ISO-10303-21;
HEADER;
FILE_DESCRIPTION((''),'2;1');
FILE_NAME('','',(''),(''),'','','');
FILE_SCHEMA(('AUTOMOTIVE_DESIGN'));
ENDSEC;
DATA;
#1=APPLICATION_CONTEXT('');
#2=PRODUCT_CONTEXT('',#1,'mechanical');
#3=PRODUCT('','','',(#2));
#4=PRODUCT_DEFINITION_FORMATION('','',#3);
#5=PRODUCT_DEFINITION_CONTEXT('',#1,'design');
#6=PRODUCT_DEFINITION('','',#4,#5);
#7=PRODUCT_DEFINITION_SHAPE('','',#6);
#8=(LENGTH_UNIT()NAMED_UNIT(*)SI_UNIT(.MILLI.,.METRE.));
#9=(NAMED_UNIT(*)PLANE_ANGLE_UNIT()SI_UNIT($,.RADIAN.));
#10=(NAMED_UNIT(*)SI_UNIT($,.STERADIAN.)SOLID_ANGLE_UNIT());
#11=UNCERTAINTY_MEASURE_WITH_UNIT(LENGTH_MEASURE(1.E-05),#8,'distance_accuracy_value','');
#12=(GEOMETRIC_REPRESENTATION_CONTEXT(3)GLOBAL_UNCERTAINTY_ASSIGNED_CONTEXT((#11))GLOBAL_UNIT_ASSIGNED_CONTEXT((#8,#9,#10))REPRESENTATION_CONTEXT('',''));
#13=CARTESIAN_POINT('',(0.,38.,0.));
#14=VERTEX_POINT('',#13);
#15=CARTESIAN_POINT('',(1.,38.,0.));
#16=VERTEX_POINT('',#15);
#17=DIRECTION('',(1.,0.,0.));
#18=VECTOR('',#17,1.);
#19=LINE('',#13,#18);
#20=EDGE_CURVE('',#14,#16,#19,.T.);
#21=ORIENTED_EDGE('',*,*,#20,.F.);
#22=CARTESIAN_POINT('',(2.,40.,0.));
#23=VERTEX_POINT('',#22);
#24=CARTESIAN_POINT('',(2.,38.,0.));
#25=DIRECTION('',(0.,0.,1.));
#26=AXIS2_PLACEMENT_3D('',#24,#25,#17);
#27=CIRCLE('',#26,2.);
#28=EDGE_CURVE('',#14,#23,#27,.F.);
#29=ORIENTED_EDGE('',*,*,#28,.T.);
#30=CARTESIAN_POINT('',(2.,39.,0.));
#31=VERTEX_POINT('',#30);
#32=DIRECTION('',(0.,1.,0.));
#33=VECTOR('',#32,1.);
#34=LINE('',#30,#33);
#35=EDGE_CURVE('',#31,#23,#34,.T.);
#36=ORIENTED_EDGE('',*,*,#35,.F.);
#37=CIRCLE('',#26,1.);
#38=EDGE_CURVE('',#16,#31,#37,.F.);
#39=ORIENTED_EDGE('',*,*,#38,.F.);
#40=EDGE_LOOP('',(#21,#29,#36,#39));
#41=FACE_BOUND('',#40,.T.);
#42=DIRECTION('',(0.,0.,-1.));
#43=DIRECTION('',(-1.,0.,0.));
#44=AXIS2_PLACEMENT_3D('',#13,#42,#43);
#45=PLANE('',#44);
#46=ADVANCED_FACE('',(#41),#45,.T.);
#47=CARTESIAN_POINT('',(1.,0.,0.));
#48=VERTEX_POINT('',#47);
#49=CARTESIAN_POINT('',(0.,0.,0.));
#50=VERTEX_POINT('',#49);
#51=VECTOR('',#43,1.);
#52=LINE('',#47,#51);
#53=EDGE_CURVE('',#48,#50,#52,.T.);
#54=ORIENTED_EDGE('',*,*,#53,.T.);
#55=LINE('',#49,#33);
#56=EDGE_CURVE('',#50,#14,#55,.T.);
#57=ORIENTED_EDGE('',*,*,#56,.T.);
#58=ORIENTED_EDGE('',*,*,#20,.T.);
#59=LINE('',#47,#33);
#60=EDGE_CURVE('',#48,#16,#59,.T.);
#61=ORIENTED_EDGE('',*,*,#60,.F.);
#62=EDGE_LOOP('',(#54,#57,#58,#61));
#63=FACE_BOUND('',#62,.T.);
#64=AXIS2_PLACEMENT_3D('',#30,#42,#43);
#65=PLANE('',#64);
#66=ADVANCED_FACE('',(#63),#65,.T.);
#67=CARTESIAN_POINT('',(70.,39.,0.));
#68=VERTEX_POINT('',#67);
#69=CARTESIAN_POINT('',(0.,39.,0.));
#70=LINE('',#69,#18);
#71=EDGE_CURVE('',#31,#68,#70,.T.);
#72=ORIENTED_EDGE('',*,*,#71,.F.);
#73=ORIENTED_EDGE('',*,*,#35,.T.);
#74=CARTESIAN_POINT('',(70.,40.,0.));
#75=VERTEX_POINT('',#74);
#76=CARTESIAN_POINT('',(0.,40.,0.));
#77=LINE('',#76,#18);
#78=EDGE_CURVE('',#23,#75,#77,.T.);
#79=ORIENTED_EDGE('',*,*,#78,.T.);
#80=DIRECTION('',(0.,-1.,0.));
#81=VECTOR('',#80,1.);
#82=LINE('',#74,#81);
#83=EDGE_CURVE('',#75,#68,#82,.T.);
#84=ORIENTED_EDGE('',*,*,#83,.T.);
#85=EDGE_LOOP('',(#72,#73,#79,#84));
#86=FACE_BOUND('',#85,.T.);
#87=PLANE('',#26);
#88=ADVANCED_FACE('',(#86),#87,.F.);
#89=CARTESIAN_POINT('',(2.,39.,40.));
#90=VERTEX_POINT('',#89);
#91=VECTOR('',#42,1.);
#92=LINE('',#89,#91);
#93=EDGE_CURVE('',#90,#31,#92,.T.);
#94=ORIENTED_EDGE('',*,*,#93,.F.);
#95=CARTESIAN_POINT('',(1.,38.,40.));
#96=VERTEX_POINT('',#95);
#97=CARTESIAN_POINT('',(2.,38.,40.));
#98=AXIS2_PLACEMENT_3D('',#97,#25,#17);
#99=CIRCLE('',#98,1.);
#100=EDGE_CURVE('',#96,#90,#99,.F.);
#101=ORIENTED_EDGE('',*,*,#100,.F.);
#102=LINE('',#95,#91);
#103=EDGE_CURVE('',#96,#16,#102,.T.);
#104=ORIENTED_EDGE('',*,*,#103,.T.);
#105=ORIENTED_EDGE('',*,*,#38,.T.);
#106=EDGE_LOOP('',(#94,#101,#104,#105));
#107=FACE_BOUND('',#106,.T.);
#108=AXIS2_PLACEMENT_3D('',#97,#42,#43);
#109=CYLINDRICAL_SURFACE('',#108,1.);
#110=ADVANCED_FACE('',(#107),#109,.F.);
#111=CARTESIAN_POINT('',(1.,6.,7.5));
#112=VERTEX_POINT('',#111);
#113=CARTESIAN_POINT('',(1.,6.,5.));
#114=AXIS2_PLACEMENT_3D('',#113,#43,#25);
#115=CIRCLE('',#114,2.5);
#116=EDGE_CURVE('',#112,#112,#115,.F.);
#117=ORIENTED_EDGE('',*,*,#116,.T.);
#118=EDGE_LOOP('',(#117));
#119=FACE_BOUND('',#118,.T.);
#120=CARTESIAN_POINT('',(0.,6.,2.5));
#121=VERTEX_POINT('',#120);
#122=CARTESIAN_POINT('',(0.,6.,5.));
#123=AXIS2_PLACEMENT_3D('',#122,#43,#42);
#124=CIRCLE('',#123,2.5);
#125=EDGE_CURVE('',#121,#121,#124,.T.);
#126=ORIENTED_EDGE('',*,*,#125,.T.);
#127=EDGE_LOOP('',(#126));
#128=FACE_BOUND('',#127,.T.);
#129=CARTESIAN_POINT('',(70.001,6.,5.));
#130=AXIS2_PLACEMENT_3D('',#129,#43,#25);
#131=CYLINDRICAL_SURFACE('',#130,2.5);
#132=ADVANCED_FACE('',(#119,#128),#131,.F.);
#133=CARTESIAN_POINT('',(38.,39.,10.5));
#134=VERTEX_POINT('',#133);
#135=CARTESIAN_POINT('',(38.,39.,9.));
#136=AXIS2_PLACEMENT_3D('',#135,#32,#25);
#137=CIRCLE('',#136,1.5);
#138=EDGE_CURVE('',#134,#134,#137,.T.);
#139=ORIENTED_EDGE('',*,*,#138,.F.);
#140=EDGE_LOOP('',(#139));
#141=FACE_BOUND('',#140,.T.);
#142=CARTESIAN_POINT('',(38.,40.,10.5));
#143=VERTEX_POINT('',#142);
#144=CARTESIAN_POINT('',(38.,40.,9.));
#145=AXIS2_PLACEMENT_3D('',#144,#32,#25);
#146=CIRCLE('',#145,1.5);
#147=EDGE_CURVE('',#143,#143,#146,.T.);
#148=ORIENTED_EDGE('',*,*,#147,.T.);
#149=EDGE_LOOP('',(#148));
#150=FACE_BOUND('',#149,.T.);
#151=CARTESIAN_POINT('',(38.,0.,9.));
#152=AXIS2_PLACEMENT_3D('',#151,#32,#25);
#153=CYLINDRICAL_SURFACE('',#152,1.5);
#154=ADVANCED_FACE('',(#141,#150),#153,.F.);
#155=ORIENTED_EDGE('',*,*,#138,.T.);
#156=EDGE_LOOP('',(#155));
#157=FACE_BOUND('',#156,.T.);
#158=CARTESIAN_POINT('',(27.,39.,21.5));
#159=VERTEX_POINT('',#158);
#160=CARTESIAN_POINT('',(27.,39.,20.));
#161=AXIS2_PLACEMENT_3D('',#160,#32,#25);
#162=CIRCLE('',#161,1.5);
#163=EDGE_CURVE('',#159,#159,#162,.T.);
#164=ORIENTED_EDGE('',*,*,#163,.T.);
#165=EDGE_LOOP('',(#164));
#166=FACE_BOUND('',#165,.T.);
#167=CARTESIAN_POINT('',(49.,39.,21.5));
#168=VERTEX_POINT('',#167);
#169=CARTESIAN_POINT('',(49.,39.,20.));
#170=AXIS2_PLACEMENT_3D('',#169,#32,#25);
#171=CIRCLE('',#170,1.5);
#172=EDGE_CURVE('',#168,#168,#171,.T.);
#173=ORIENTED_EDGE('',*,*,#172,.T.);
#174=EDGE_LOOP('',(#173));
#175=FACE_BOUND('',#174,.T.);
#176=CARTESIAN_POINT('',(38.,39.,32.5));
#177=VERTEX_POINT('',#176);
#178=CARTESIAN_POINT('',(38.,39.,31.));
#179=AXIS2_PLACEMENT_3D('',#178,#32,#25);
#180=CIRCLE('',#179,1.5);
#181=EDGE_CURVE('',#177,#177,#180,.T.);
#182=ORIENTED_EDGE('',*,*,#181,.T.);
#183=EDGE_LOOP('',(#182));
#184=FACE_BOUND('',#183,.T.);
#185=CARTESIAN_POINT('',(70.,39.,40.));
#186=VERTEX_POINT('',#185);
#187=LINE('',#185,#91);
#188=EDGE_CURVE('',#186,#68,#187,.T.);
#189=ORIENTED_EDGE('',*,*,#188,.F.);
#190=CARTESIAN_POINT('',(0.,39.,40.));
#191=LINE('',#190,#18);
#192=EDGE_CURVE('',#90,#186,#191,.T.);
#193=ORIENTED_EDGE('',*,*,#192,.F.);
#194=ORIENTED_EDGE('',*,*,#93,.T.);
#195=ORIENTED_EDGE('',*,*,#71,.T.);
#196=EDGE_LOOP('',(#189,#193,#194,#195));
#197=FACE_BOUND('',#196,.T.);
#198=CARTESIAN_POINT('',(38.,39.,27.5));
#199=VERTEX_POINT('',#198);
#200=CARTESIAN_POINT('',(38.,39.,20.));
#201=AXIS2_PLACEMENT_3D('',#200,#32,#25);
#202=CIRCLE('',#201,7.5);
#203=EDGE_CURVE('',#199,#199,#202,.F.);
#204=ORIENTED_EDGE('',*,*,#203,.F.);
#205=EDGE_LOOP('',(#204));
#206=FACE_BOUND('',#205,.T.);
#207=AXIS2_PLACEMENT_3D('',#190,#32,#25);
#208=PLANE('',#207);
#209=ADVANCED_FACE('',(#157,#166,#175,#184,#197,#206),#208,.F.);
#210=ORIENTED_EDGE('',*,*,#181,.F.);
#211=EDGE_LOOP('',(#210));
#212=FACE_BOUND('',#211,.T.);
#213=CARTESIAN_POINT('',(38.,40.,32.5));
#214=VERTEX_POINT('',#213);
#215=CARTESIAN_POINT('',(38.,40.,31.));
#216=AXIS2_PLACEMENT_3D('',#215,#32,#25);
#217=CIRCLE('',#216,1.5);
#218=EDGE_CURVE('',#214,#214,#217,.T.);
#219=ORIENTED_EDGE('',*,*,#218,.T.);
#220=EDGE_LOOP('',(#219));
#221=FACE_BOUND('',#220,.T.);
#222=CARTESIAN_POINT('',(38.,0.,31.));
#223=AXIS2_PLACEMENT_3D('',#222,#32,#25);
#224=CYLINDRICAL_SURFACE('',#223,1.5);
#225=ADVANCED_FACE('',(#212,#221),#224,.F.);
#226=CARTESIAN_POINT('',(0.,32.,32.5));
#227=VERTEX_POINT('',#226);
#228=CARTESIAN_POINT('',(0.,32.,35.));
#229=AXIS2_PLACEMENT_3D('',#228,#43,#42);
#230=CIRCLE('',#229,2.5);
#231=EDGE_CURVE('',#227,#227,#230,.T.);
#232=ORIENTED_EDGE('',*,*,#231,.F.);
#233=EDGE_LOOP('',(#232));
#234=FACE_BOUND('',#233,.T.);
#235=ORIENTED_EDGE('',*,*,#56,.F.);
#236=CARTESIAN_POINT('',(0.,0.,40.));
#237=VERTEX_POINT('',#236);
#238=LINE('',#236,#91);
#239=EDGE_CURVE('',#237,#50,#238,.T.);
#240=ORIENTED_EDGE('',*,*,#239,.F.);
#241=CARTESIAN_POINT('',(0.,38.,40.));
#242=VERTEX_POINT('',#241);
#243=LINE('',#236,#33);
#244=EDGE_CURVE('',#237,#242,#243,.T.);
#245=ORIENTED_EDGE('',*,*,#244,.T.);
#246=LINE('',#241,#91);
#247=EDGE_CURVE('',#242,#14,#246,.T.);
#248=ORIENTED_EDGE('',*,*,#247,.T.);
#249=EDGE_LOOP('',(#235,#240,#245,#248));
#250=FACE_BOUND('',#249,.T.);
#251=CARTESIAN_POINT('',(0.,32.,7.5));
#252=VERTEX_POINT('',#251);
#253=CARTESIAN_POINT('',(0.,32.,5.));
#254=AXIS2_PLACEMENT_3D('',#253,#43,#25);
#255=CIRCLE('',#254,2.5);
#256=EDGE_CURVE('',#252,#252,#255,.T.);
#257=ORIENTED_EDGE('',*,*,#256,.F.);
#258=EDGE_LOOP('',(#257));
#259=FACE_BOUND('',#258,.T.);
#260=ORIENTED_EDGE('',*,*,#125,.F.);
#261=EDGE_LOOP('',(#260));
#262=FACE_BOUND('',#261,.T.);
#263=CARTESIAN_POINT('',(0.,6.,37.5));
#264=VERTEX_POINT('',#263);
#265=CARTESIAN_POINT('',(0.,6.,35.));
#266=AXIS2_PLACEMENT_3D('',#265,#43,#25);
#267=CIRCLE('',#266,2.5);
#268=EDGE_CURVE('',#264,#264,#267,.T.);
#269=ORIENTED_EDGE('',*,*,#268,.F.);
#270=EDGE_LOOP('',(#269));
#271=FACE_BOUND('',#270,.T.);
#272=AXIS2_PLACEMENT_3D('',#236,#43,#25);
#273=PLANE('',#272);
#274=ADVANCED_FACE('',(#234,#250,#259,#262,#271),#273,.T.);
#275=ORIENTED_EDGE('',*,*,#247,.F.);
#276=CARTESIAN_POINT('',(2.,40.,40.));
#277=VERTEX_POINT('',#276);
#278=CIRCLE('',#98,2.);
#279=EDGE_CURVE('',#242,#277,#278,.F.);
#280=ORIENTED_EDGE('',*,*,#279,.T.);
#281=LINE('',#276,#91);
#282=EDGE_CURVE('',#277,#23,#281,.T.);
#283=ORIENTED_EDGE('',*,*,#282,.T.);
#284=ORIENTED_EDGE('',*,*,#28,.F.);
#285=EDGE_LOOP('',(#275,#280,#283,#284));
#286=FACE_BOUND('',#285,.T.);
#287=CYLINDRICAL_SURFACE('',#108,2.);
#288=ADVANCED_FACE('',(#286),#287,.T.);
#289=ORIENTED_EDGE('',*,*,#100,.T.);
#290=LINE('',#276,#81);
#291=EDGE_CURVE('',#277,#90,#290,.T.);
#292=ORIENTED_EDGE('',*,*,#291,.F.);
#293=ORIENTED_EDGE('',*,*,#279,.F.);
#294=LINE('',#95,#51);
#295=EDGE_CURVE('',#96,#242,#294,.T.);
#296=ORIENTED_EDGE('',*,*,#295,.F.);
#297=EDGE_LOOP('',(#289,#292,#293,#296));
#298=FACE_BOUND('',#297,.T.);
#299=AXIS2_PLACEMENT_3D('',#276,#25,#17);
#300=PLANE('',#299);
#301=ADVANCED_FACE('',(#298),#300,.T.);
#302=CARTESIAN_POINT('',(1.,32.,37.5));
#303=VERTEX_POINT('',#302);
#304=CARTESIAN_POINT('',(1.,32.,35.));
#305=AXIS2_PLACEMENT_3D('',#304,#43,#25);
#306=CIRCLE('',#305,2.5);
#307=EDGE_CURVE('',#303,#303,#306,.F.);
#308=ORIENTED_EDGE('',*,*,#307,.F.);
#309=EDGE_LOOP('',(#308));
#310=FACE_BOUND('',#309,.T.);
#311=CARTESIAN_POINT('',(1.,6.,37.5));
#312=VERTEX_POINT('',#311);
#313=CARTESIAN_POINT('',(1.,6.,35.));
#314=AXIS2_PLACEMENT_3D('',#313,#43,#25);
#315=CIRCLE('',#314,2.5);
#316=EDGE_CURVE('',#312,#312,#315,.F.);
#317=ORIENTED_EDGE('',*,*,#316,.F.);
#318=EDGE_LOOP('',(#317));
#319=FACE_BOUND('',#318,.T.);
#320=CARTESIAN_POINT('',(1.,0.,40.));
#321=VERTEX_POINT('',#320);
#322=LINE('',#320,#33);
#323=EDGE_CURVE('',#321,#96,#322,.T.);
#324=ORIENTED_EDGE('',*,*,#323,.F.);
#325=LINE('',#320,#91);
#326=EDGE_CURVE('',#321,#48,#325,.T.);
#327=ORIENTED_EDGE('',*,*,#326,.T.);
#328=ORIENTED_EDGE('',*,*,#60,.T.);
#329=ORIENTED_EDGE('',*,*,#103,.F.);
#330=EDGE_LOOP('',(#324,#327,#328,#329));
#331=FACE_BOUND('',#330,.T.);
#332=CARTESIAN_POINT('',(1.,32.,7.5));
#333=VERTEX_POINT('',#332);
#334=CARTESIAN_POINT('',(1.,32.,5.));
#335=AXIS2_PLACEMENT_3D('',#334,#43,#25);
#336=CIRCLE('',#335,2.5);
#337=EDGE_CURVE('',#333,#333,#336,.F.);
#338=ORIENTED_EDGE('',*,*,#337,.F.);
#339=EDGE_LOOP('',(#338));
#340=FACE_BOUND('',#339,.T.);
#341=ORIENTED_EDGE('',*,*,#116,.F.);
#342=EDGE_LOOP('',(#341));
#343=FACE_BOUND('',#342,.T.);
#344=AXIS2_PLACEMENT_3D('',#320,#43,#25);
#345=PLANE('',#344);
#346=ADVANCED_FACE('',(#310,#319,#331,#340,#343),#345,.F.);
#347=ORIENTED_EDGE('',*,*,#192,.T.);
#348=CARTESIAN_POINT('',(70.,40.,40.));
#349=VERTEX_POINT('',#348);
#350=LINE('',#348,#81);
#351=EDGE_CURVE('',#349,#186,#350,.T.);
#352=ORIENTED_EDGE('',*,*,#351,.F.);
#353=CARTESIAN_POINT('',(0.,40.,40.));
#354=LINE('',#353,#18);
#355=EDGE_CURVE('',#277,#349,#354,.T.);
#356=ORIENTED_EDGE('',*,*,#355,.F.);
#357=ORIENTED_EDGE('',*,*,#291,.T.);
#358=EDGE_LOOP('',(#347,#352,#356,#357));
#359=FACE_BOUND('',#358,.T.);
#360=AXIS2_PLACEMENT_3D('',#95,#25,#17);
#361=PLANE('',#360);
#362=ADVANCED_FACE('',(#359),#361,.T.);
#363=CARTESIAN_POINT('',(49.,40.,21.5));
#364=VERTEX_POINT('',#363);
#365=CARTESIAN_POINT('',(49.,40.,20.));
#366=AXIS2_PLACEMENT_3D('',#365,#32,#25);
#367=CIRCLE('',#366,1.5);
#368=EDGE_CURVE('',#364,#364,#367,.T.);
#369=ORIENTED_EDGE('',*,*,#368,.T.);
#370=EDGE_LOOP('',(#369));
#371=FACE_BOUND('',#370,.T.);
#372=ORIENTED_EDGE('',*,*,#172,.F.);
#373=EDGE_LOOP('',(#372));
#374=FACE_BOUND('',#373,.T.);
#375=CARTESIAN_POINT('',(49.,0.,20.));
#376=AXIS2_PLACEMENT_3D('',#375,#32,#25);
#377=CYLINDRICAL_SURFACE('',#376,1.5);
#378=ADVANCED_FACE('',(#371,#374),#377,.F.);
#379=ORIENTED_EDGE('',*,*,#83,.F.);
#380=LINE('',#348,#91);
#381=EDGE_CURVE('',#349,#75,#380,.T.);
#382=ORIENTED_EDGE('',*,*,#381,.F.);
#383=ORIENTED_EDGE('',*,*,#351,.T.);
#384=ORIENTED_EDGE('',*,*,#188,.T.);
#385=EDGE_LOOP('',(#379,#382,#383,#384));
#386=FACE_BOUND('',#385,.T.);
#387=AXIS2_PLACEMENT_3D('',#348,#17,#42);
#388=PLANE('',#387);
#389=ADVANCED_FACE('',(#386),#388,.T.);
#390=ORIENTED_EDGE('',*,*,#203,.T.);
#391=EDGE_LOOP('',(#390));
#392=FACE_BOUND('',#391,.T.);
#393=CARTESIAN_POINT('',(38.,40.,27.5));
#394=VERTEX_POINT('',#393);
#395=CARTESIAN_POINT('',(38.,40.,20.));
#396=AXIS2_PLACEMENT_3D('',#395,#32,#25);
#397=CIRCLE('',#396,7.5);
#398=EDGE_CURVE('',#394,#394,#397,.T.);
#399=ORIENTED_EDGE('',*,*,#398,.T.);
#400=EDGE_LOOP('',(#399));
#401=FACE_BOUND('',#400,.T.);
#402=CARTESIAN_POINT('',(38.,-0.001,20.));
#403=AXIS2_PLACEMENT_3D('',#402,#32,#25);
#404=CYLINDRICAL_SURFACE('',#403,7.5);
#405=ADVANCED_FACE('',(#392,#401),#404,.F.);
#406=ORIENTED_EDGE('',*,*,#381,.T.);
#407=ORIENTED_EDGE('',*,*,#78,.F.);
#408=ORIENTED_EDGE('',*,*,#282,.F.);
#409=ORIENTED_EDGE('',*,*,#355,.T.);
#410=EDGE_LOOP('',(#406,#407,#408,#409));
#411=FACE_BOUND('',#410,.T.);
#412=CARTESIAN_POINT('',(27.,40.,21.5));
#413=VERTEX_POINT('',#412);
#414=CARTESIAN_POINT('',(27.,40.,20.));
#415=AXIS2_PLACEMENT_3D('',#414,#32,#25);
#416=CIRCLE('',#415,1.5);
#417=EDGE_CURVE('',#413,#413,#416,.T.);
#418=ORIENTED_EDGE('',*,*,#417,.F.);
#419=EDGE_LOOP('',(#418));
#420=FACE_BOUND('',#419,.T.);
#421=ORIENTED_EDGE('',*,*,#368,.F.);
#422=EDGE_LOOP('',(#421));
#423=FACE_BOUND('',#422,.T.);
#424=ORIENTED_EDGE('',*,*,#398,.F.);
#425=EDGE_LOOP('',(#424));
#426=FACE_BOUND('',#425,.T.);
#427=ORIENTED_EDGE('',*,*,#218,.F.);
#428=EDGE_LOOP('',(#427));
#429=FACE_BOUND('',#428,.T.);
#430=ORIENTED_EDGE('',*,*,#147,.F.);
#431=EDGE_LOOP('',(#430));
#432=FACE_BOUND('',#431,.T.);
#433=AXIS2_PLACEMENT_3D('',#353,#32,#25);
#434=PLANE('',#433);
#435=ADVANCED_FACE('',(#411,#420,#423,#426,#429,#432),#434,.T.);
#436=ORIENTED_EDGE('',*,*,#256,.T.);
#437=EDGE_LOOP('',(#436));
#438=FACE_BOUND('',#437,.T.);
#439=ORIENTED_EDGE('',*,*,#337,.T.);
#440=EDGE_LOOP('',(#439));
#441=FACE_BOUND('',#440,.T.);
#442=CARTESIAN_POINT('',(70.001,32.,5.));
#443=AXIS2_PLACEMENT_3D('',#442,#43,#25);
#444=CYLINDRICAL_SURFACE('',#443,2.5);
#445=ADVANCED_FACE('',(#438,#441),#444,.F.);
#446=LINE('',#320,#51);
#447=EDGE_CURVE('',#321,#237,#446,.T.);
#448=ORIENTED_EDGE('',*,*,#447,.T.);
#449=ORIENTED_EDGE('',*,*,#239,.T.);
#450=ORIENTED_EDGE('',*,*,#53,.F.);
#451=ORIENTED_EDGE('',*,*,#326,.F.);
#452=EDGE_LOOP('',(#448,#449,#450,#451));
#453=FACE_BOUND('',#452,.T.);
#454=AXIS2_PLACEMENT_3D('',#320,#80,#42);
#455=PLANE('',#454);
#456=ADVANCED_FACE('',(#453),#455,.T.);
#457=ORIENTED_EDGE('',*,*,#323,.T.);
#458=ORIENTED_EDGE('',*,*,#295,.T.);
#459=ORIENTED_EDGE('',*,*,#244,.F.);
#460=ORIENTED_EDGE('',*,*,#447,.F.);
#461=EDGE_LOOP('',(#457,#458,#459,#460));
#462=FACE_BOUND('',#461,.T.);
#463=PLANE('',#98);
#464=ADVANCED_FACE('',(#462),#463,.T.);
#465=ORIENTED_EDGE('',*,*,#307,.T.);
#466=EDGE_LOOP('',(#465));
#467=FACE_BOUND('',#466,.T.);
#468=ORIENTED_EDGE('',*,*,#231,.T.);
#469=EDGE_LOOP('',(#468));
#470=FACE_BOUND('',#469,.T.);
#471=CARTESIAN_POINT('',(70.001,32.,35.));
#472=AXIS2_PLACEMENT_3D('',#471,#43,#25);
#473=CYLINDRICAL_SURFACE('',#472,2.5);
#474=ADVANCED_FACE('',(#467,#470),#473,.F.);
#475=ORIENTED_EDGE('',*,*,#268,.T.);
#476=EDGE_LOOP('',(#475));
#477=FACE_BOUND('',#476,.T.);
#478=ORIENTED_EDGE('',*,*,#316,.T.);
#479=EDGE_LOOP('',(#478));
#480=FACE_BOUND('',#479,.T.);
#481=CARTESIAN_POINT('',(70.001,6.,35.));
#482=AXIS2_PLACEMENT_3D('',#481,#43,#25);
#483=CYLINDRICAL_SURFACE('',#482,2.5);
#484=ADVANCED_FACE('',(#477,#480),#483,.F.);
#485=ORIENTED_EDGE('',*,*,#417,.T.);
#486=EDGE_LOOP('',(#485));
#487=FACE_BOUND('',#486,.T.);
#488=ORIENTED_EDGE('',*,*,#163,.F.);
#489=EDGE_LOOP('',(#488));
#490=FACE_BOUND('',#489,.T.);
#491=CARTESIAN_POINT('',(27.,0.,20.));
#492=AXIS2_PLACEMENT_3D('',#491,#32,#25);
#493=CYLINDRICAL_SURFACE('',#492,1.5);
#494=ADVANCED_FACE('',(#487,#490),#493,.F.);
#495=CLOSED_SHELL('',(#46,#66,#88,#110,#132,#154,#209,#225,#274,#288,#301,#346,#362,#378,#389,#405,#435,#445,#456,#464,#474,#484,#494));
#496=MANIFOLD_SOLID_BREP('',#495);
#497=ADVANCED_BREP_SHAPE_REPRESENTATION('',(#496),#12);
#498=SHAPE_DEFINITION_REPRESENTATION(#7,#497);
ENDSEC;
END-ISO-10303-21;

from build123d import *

# Parameters (mm, degrees)
BASE_FLANGE1_DEPTH = 40
CUT_EXTRUDE1_REACH = 92
SKETCH6_R          = 7.5
SKETCH7_R          = 1.5
CUT_EXTRUDE2_DEPTH = 91
CUT_EXTRUDE3_REACH = 92
SKETCH8_R          = 2.5


# Sheet-metal steps are written as plain solids
with BuildPart() as part:
    # Sketch1 → Base-Flange1 (new body)
    with BuildSketch(Plane.XY):
        with BuildLine():
            Line((0, 0), (0, 38))
            ThreePointArc((0, 38), (0.585786438, 39.414213562), (2, 40))
            Line((2, 40), (70, 40))
            Line((70, 40), (70, 39))
            Line((70, 39), (2, 39))
            ThreePointArc((2, 39), (1.292893219, 38.707106781), (1, 38))
            Line((1, 38), (1, 0))
            Line((1, 0), (0, 0))
        make_face()
    extrude(amount=BASE_FLANGE1_DEPTH)

    # Sketch6 → Cut-Extrude1 (cut, up to next)
    with BuildSketch(Plane(origin=(0, 40, 0), x_dir=(1, 0, 0), z_dir=(0, 1, 0)), mode=Mode.PRIVATE) as cut_extrude1_sk1:
        with Locations(Location((38, -20, 0), (0, 0, 270))):
            Circle(SKETCH6_R)
    cut_extrude1_tool1 = extrude(cut_extrude1_sk1.sketch, amount=-CUT_EXTRUDE1_REACH, mode=Mode.PRIVATE) & part.part
    add(cut_extrude1_tool1.solids().sort_by_distance((38, 40, 20))[0], mode=Mode.SUBTRACT)

    # Sketch7 → Cut-Extrude2 (cut, through all)
    with BuildSketch(Plane(origin=(0, 40, 0), x_dir=(1, 0, 0), z_dir=(0, 1, 0))):
        with Locations(Location((49, -20, 0), (0, 0, 270))):
            Circle(SKETCH7_R)
        with Locations(Location((38, -31, 0), (0, 0, 270))):
            Circle(SKETCH7_R)
        with Locations(Location((27, -20, 0), (0, 0, 270))):
            Circle(SKETCH7_R)
        with Locations(Location((38, -9, 0), (0, 0, 270))):
            Circle(SKETCH7_R)
    extrude(amount=-CUT_EXTRUDE2_DEPTH, mode=Mode.SUBTRACT)

    # Sketch8 → Cut-Extrude3 (cut, up to next)
    with BuildSketch(Plane.ZY, mode=Mode.PRIVATE) as cut_extrude3_sk1:
        with Locations((5, 32)):
            Circle(SKETCH8_R)
    cut_extrude3_tool1 = extrude(cut_extrude3_sk1.sketch, amount=-CUT_EXTRUDE3_REACH, mode=Mode.PRIVATE) & part.part
    # Sketch8 → Cut-Extrude3 (cut, up to next)
    with BuildSketch(Plane.ZY, mode=Mode.PRIVATE) as cut_extrude3_sk2:
        with Locations((5, 6)):
            Circle(SKETCH8_R)
    cut_extrude3_tool2 = extrude(cut_extrude3_sk2.sketch, amount=-CUT_EXTRUDE3_REACH, mode=Mode.PRIVATE) & part.part
    # Sketch8 → Cut-Extrude3 (cut, up to next)
    with BuildSketch(Plane.ZY, mode=Mode.PRIVATE) as cut_extrude3_sk3:
        with Locations((35, 6)):
            Circle(SKETCH8_R)
    cut_extrude3_tool3 = extrude(cut_extrude3_sk3.sketch, amount=-CUT_EXTRUDE3_REACH, mode=Mode.PRIVATE) & part.part
    # Sketch8 → Cut-Extrude3 (cut, up to next)
    with BuildSketch(Plane.ZY, mode=Mode.PRIVATE) as cut_extrude3_sk4:
        with Locations((35, 32)):
            Circle(SKETCH8_R)
    cut_extrude3_tool4 = extrude(cut_extrude3_sk4.sketch, amount=-CUT_EXTRUDE3_REACH, mode=Mode.PRIVATE) & part.part
    add(cut_extrude3_tool1.solids().sort_by_distance((0, 32, 5))[0], mode=Mode.SUBTRACT)
    add(cut_extrude3_tool2.solids().sort_by_distance((0, 6, 5))[0], mode=Mode.SUBTRACT)
    add(cut_extrude3_tool3.solids().sort_by_distance((0, 6, 35))[0], mode=Mode.SUBTRACT)
    add(cut_extrude3_tool4.solids().sort_by_distance((0, 32, 35))[0], mode=Mode.SUBTRACT)


solid = part.part
